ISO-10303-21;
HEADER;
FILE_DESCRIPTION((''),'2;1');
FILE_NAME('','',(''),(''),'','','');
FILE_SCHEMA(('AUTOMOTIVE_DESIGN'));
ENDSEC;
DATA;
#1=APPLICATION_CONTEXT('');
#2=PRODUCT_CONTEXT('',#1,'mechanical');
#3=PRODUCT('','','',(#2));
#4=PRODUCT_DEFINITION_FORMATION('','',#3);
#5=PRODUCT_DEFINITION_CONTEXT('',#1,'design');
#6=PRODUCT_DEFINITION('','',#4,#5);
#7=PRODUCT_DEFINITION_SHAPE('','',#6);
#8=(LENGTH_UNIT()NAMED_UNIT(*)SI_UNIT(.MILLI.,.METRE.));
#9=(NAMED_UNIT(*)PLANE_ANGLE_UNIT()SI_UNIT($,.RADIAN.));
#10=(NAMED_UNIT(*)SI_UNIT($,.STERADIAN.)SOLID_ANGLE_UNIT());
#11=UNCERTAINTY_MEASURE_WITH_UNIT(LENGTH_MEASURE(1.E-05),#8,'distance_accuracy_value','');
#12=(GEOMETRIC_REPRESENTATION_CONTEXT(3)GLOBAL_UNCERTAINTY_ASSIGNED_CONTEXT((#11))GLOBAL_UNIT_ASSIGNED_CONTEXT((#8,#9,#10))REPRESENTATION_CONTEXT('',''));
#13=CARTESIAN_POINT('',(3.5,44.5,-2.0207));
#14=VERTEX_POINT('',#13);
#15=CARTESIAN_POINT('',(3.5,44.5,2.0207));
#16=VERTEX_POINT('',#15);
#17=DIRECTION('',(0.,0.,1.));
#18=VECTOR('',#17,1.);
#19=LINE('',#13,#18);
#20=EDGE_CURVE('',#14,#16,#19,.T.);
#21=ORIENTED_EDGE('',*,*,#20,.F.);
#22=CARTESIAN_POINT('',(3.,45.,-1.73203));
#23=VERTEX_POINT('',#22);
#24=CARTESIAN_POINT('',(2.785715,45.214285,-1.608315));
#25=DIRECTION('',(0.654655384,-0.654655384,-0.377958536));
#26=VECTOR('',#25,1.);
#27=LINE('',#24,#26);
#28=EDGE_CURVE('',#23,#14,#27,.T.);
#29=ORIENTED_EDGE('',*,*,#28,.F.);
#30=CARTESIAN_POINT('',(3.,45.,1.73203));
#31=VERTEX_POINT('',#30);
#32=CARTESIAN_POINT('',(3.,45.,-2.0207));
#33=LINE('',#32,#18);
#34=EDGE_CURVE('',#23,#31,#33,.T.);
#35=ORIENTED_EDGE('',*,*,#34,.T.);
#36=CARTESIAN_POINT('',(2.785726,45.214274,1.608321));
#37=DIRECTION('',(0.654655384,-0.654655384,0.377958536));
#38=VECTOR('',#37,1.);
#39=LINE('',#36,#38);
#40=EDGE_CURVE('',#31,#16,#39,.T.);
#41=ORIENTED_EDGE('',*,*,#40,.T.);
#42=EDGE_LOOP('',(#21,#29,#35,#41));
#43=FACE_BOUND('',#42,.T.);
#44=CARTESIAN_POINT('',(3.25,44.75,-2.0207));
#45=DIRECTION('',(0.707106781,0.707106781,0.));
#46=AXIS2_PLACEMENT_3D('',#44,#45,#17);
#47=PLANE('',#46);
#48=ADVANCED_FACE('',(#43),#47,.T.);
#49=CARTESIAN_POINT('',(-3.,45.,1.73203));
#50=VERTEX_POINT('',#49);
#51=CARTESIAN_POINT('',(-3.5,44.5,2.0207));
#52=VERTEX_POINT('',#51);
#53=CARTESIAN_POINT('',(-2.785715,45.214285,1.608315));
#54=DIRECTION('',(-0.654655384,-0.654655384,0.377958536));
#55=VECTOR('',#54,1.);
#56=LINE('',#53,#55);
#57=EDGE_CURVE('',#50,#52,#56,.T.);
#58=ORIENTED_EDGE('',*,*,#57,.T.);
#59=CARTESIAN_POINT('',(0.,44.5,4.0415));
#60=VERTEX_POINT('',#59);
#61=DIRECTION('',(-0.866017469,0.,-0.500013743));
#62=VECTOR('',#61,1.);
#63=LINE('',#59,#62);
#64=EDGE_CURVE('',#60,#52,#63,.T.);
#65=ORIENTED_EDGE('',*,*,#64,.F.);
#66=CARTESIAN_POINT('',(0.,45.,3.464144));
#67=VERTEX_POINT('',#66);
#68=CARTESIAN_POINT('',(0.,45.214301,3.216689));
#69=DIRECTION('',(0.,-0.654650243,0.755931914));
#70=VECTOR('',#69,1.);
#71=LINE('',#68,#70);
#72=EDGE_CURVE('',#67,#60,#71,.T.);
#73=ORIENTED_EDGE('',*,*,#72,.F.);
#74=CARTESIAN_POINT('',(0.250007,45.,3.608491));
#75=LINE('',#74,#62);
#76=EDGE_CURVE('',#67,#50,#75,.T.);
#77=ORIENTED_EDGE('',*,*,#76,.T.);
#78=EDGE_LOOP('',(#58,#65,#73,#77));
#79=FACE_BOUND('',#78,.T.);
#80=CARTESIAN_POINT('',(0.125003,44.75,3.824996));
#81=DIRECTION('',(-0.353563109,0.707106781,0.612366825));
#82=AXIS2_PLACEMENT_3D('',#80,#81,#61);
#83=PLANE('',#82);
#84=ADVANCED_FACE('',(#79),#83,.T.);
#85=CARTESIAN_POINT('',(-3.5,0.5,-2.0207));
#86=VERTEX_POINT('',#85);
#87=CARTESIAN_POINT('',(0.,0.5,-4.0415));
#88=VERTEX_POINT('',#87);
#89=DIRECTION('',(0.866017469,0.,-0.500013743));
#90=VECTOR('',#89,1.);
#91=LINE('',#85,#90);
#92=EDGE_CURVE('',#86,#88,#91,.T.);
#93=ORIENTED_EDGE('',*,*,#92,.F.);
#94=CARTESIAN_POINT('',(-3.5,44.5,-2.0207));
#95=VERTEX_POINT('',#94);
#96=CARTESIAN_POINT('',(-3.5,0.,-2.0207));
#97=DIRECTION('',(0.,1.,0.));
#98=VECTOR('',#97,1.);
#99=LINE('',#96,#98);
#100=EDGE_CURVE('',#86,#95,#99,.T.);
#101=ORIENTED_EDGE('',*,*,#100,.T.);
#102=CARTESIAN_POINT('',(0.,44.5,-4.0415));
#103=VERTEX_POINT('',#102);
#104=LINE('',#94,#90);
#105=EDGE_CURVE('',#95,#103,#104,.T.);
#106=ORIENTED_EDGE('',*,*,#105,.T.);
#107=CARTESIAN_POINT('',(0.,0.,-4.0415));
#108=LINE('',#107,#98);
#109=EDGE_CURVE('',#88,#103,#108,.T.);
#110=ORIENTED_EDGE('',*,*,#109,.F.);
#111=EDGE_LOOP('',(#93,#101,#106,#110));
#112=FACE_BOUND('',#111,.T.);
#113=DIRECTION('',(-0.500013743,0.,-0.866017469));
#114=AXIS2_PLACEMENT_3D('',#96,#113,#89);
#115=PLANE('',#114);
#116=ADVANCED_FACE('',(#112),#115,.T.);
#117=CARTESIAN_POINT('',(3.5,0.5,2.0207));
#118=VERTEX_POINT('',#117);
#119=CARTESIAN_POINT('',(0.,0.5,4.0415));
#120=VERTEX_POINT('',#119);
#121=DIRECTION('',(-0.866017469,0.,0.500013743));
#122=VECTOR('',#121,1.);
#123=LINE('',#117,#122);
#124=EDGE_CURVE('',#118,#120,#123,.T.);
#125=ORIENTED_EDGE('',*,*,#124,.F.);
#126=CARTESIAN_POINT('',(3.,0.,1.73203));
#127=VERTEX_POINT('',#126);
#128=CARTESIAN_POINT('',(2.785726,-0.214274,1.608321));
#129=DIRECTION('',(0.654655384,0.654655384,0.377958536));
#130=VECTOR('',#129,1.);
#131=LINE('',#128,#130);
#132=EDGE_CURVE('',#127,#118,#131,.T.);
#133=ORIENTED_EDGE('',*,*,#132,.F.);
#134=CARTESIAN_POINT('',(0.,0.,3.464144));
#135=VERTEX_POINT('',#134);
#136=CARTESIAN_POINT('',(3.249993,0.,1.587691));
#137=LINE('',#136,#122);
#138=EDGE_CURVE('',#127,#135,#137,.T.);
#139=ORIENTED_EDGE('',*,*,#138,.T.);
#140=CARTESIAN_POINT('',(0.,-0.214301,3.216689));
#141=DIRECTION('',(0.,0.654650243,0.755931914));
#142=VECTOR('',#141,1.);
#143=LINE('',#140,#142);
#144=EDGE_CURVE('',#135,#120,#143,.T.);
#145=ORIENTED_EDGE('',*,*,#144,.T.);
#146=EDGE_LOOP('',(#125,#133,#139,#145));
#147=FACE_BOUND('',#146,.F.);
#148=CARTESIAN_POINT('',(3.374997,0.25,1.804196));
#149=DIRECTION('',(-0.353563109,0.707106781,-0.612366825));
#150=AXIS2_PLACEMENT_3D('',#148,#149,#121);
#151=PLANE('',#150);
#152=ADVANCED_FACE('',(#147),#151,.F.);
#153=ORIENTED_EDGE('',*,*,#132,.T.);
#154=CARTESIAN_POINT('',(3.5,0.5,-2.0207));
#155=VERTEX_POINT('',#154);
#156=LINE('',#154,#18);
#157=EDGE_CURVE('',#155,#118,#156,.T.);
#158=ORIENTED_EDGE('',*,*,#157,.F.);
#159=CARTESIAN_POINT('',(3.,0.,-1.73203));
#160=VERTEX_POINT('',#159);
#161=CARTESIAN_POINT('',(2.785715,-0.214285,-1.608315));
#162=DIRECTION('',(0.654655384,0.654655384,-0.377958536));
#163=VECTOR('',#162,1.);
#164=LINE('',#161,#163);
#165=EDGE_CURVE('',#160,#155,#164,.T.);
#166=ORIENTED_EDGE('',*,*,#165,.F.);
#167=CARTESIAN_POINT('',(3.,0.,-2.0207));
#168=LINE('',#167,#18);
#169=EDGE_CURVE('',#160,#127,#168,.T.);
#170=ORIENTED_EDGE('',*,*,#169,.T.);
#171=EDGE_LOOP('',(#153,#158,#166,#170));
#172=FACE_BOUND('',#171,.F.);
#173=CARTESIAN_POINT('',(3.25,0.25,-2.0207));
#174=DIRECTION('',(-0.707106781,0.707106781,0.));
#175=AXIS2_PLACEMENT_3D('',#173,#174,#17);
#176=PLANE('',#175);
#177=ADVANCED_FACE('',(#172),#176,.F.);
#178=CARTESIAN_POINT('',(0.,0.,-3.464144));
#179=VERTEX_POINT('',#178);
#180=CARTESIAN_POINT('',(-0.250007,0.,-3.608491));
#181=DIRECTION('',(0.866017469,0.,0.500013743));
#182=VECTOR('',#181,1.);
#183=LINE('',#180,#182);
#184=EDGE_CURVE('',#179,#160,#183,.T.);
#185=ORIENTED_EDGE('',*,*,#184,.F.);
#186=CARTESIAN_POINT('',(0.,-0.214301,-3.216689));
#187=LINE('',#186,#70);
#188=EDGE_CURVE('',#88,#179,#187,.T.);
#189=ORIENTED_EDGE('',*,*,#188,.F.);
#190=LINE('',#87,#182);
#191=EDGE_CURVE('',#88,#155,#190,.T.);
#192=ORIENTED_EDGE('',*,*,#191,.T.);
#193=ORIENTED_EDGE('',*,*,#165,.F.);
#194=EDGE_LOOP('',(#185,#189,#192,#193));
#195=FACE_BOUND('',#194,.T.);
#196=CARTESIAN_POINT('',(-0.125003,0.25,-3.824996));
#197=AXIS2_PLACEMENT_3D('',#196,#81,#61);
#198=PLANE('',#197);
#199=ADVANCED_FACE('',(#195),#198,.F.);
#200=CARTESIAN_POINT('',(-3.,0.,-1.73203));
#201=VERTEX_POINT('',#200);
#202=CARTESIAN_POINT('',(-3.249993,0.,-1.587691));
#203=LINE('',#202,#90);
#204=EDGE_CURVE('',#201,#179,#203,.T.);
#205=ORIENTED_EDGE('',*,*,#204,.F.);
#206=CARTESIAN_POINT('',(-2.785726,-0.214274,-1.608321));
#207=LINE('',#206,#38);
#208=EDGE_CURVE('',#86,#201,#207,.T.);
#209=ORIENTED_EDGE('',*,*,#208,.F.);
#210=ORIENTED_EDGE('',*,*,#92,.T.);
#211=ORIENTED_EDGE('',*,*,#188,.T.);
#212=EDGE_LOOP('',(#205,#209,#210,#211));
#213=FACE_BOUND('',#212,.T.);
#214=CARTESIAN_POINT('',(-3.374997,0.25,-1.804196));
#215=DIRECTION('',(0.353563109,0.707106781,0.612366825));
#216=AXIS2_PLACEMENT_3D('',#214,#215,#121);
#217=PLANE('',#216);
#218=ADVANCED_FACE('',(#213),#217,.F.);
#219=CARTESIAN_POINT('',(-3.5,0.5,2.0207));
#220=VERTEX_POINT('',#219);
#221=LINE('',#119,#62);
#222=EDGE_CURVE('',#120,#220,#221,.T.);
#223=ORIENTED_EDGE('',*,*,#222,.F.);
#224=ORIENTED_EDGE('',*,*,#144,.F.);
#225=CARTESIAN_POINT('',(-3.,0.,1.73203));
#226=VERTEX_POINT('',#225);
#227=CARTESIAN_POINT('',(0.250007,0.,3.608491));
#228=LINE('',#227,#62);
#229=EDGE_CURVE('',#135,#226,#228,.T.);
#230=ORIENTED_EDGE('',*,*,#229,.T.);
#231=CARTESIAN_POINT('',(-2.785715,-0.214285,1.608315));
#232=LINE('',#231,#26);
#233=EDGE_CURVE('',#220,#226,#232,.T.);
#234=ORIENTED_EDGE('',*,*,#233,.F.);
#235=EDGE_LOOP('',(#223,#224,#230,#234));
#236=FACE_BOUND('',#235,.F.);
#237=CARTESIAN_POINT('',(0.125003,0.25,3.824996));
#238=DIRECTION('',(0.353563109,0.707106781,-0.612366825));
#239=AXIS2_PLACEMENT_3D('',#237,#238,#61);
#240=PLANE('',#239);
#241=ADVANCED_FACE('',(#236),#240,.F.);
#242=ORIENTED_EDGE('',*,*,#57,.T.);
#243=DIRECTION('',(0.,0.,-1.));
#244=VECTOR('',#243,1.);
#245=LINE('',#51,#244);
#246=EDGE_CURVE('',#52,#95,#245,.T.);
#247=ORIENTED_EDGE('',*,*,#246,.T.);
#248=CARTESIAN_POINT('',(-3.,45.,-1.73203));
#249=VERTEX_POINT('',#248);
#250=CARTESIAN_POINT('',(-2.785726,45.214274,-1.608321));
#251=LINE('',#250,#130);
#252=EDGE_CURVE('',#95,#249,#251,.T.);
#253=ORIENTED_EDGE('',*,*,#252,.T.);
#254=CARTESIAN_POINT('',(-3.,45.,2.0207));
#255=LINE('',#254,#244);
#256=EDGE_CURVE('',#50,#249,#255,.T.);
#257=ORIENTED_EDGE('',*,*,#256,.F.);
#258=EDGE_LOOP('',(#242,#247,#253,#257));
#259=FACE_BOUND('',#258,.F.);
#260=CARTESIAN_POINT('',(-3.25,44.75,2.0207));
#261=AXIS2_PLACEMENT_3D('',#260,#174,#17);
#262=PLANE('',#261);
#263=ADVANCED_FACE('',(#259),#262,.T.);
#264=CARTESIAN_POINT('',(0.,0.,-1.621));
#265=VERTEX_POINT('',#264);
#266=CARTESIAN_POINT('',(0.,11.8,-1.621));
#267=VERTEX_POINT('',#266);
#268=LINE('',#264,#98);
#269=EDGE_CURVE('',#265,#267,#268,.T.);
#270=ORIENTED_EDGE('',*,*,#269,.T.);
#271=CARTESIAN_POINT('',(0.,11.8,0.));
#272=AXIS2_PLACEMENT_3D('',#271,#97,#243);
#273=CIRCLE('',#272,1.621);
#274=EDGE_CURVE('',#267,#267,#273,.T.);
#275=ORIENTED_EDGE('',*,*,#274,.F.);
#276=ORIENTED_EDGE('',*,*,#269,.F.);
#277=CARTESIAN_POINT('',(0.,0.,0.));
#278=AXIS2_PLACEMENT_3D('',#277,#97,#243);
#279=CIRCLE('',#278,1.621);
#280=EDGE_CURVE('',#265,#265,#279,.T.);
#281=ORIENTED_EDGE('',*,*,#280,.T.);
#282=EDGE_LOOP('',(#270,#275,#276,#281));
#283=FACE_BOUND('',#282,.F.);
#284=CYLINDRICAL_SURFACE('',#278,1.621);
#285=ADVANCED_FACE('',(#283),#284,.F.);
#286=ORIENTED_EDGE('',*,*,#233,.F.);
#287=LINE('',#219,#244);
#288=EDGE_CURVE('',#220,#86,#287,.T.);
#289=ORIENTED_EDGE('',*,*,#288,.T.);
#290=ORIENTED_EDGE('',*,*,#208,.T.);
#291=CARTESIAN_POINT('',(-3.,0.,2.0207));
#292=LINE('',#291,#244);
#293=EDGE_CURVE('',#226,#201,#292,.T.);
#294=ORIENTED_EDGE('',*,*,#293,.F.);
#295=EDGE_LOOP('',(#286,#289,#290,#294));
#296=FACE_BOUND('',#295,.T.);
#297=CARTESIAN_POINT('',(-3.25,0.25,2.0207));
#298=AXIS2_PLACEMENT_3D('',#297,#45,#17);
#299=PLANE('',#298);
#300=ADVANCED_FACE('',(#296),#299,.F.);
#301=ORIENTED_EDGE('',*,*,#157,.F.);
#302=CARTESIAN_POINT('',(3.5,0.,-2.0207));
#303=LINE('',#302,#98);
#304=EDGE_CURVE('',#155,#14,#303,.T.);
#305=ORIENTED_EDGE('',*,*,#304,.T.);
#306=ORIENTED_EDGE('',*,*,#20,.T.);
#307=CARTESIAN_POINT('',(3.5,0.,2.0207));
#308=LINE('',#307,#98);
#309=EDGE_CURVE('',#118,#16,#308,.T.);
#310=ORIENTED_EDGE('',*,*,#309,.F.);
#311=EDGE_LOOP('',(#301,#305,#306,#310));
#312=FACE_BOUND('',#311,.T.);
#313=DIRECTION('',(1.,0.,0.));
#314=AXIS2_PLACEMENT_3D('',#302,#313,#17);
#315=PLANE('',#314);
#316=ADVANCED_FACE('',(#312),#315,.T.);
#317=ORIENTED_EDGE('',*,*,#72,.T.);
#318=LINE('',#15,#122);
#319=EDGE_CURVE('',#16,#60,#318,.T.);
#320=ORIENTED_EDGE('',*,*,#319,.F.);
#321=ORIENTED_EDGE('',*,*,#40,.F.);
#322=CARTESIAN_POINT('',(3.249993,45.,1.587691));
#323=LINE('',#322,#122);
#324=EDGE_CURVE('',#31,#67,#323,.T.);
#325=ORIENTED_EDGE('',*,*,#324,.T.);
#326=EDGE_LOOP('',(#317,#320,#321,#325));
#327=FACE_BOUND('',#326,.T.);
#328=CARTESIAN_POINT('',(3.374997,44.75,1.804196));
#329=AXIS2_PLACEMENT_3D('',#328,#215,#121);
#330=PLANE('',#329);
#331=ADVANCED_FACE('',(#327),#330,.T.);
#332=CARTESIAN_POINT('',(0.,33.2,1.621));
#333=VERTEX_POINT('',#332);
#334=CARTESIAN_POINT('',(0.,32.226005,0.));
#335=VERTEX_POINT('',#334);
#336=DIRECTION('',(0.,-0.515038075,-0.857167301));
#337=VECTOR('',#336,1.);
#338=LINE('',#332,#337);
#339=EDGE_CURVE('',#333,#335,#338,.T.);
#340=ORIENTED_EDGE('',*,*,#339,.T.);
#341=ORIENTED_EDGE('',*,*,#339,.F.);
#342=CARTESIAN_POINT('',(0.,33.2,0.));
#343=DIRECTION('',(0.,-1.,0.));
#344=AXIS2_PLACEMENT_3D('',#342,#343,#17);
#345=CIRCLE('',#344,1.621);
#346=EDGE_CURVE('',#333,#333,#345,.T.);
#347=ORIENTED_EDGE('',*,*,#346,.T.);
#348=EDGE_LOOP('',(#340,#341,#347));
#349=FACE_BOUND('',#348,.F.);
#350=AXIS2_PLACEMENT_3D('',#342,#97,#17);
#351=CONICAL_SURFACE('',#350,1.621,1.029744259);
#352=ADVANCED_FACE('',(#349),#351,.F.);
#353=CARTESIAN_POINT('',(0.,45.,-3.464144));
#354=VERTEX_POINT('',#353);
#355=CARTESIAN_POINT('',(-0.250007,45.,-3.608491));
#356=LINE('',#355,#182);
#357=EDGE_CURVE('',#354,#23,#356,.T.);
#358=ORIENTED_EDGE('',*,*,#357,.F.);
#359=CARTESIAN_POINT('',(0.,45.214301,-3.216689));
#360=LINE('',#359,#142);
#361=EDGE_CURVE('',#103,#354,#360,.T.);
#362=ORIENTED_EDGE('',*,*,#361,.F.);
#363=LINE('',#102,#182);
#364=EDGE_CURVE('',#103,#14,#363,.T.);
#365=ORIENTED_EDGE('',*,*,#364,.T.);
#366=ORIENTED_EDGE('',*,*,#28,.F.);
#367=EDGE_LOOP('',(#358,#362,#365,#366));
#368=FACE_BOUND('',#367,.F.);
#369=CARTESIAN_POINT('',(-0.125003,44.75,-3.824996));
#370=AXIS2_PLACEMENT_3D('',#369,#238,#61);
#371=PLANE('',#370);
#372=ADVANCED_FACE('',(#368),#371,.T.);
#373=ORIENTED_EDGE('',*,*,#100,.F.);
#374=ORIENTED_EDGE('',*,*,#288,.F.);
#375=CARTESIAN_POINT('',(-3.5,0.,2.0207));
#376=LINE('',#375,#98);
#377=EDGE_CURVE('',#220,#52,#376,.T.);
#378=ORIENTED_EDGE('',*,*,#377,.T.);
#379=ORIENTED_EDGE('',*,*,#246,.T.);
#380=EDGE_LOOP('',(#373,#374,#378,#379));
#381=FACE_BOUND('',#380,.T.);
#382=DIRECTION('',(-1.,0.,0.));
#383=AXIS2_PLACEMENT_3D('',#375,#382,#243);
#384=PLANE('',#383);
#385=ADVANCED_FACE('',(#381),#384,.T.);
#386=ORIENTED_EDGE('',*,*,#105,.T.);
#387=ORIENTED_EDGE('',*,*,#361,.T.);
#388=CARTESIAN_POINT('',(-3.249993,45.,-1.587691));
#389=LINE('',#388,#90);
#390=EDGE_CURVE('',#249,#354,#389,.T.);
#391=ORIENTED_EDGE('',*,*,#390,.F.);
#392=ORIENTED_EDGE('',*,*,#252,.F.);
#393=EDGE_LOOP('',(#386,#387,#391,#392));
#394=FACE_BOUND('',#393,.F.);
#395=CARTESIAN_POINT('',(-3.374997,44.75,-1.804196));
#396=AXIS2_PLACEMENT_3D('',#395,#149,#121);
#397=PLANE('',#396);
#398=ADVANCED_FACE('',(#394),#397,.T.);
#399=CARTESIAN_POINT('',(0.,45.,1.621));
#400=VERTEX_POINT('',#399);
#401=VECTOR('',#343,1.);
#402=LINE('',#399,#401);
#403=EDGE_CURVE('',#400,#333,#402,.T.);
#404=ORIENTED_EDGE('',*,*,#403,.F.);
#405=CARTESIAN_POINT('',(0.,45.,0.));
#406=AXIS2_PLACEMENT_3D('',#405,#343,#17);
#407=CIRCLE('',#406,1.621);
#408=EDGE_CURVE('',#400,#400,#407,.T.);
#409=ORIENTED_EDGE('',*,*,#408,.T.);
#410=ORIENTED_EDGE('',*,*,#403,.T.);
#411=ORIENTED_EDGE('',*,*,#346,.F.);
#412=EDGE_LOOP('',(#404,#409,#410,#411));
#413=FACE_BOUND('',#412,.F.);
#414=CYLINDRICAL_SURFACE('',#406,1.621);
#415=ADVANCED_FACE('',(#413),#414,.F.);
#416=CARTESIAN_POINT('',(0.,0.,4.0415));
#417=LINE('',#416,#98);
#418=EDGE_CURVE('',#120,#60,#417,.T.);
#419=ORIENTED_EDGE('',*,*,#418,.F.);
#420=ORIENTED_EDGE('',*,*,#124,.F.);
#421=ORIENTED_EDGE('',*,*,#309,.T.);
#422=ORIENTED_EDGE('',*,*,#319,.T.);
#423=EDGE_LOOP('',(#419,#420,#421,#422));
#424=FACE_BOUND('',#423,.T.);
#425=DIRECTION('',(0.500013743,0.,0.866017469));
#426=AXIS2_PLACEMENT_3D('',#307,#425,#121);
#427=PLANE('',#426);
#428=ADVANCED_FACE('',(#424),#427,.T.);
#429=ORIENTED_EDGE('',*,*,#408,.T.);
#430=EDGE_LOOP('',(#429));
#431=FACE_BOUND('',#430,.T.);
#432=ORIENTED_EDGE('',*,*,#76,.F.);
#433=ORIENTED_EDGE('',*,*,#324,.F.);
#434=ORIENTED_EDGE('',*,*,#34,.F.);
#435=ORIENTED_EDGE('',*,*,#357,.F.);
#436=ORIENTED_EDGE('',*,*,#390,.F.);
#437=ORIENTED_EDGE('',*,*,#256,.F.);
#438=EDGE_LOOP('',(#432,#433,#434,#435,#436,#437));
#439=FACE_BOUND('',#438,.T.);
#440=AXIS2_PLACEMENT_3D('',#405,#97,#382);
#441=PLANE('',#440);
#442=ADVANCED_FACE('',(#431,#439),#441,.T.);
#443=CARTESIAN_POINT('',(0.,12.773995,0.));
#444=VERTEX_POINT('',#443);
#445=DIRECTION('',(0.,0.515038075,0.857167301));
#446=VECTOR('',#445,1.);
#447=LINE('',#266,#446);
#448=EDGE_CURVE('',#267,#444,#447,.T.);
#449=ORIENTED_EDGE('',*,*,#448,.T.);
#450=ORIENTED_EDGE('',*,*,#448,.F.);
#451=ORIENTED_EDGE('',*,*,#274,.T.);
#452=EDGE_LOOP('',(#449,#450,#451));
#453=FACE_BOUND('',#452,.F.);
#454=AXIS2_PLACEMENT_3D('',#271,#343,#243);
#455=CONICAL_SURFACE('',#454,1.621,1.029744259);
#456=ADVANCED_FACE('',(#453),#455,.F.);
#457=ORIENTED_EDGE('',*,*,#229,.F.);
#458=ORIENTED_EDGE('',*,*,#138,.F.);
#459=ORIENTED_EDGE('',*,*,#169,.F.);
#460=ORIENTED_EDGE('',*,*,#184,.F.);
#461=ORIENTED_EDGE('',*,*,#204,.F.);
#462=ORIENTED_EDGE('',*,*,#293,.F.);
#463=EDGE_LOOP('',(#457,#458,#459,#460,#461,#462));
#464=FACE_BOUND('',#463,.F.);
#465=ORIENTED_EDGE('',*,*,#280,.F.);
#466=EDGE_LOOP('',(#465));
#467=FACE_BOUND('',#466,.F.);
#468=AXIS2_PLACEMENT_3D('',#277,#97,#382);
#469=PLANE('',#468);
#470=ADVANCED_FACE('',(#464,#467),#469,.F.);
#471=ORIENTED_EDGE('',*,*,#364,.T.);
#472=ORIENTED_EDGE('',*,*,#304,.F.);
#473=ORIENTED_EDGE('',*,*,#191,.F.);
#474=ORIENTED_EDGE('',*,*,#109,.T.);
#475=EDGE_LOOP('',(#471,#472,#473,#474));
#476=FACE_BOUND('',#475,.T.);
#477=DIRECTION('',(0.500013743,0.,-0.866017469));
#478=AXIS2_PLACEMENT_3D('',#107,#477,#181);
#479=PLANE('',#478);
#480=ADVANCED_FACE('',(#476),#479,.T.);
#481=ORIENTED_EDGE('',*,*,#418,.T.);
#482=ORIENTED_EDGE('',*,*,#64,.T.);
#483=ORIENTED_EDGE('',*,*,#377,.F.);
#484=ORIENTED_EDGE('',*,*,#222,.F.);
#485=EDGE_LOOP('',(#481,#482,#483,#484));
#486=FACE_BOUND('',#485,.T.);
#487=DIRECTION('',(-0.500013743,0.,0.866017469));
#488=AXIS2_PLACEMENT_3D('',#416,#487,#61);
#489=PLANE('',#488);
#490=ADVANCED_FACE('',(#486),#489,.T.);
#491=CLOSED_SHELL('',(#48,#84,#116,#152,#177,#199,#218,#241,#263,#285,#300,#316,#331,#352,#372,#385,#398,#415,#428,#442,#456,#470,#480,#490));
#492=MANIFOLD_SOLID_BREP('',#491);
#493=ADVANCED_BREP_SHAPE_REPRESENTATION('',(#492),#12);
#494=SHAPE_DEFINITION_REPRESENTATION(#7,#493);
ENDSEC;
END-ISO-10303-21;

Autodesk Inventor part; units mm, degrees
ref_plane "YZ Plane" through (0, 0, 0) normal (1, 0, 0) x (0, 1, 0)
ref_plane "XZ Plane" through (0, 0, 0) normal (0, 1, 0) x (-1, 0, 0)
ref_plane "XY Plane" through (0, 0, 0) normal (0, 0, 1) x (1, 0, 0)
sketch "Skizze1" plane through (0, 0, 0) normal (0, 1, 0) x (-1, 0, 0)
  line L0 (3.5, -2.0207) -> (0, -4.0415)
  line L1 (0, -4.0415) -> (-3.5, -2.0207)
  line L2 (-3.5, -2.0207) -> (-3.5, 2.0207)
  line L3 (-3.5, 2.0207) -> (0, 4.0415)
  line L4 (0, 4.0415) -> (3.5, 2.0207)
  line L5 (3.5, 2.0207) -> (3.5, -2.0207)
  point P0 (0, 0)
  point P1 (0, 0)
  dimension "d0" = 7
extrude "Extrusion1" add sketch "Skizze1" along normal blind 45
sketch "Skizze2" plane through (0, 45, 0) normal (0, 1, 0) x (1, 0, 0)
  point P0 (0, 0)
  point P1 (0, 0)
hole "Bohrung1" at (0, 45, 0) direction (0, -1, 0) diameter 3.242 depth 11.8 tip angle 118 thread size "M4x0.7" class "6H" standard "ISO Metric profile"
sketch "Skizze3" plane through (0, 0, 0) normal (0, -1, 0) x (1, 0, 0)
  point P0 (0, 0)
  point P1 (0, 0)
hole "Bohrung2" at (0, 0, 0) direction (0, 1, 0) diameter 3.242 depth 11.8 tip angle 118 thread size "M4x0.7" class "6H" standard "ISO Metric profile"
chamfer "Fasen1" distance 0.5 angle 45 12 edges at (-1.75, 45, 3.0311) (1.75, 45, 3.0311) (3.5, 45, 0) (1.75, 45, -3.0311) (-1.75, 45, -3.0311) (-3.5, 45, 0) (-3.5, 0, 0) (-1.75, 0, 3.0311) (1.75, 0, 3.0311) (3.5, 0, 0) (1.75, 0, -3.0311) (-1.75, 0, -3.0311)
properties part number "Abstandsbolzen 45mm" material "Aluminium 6061"
